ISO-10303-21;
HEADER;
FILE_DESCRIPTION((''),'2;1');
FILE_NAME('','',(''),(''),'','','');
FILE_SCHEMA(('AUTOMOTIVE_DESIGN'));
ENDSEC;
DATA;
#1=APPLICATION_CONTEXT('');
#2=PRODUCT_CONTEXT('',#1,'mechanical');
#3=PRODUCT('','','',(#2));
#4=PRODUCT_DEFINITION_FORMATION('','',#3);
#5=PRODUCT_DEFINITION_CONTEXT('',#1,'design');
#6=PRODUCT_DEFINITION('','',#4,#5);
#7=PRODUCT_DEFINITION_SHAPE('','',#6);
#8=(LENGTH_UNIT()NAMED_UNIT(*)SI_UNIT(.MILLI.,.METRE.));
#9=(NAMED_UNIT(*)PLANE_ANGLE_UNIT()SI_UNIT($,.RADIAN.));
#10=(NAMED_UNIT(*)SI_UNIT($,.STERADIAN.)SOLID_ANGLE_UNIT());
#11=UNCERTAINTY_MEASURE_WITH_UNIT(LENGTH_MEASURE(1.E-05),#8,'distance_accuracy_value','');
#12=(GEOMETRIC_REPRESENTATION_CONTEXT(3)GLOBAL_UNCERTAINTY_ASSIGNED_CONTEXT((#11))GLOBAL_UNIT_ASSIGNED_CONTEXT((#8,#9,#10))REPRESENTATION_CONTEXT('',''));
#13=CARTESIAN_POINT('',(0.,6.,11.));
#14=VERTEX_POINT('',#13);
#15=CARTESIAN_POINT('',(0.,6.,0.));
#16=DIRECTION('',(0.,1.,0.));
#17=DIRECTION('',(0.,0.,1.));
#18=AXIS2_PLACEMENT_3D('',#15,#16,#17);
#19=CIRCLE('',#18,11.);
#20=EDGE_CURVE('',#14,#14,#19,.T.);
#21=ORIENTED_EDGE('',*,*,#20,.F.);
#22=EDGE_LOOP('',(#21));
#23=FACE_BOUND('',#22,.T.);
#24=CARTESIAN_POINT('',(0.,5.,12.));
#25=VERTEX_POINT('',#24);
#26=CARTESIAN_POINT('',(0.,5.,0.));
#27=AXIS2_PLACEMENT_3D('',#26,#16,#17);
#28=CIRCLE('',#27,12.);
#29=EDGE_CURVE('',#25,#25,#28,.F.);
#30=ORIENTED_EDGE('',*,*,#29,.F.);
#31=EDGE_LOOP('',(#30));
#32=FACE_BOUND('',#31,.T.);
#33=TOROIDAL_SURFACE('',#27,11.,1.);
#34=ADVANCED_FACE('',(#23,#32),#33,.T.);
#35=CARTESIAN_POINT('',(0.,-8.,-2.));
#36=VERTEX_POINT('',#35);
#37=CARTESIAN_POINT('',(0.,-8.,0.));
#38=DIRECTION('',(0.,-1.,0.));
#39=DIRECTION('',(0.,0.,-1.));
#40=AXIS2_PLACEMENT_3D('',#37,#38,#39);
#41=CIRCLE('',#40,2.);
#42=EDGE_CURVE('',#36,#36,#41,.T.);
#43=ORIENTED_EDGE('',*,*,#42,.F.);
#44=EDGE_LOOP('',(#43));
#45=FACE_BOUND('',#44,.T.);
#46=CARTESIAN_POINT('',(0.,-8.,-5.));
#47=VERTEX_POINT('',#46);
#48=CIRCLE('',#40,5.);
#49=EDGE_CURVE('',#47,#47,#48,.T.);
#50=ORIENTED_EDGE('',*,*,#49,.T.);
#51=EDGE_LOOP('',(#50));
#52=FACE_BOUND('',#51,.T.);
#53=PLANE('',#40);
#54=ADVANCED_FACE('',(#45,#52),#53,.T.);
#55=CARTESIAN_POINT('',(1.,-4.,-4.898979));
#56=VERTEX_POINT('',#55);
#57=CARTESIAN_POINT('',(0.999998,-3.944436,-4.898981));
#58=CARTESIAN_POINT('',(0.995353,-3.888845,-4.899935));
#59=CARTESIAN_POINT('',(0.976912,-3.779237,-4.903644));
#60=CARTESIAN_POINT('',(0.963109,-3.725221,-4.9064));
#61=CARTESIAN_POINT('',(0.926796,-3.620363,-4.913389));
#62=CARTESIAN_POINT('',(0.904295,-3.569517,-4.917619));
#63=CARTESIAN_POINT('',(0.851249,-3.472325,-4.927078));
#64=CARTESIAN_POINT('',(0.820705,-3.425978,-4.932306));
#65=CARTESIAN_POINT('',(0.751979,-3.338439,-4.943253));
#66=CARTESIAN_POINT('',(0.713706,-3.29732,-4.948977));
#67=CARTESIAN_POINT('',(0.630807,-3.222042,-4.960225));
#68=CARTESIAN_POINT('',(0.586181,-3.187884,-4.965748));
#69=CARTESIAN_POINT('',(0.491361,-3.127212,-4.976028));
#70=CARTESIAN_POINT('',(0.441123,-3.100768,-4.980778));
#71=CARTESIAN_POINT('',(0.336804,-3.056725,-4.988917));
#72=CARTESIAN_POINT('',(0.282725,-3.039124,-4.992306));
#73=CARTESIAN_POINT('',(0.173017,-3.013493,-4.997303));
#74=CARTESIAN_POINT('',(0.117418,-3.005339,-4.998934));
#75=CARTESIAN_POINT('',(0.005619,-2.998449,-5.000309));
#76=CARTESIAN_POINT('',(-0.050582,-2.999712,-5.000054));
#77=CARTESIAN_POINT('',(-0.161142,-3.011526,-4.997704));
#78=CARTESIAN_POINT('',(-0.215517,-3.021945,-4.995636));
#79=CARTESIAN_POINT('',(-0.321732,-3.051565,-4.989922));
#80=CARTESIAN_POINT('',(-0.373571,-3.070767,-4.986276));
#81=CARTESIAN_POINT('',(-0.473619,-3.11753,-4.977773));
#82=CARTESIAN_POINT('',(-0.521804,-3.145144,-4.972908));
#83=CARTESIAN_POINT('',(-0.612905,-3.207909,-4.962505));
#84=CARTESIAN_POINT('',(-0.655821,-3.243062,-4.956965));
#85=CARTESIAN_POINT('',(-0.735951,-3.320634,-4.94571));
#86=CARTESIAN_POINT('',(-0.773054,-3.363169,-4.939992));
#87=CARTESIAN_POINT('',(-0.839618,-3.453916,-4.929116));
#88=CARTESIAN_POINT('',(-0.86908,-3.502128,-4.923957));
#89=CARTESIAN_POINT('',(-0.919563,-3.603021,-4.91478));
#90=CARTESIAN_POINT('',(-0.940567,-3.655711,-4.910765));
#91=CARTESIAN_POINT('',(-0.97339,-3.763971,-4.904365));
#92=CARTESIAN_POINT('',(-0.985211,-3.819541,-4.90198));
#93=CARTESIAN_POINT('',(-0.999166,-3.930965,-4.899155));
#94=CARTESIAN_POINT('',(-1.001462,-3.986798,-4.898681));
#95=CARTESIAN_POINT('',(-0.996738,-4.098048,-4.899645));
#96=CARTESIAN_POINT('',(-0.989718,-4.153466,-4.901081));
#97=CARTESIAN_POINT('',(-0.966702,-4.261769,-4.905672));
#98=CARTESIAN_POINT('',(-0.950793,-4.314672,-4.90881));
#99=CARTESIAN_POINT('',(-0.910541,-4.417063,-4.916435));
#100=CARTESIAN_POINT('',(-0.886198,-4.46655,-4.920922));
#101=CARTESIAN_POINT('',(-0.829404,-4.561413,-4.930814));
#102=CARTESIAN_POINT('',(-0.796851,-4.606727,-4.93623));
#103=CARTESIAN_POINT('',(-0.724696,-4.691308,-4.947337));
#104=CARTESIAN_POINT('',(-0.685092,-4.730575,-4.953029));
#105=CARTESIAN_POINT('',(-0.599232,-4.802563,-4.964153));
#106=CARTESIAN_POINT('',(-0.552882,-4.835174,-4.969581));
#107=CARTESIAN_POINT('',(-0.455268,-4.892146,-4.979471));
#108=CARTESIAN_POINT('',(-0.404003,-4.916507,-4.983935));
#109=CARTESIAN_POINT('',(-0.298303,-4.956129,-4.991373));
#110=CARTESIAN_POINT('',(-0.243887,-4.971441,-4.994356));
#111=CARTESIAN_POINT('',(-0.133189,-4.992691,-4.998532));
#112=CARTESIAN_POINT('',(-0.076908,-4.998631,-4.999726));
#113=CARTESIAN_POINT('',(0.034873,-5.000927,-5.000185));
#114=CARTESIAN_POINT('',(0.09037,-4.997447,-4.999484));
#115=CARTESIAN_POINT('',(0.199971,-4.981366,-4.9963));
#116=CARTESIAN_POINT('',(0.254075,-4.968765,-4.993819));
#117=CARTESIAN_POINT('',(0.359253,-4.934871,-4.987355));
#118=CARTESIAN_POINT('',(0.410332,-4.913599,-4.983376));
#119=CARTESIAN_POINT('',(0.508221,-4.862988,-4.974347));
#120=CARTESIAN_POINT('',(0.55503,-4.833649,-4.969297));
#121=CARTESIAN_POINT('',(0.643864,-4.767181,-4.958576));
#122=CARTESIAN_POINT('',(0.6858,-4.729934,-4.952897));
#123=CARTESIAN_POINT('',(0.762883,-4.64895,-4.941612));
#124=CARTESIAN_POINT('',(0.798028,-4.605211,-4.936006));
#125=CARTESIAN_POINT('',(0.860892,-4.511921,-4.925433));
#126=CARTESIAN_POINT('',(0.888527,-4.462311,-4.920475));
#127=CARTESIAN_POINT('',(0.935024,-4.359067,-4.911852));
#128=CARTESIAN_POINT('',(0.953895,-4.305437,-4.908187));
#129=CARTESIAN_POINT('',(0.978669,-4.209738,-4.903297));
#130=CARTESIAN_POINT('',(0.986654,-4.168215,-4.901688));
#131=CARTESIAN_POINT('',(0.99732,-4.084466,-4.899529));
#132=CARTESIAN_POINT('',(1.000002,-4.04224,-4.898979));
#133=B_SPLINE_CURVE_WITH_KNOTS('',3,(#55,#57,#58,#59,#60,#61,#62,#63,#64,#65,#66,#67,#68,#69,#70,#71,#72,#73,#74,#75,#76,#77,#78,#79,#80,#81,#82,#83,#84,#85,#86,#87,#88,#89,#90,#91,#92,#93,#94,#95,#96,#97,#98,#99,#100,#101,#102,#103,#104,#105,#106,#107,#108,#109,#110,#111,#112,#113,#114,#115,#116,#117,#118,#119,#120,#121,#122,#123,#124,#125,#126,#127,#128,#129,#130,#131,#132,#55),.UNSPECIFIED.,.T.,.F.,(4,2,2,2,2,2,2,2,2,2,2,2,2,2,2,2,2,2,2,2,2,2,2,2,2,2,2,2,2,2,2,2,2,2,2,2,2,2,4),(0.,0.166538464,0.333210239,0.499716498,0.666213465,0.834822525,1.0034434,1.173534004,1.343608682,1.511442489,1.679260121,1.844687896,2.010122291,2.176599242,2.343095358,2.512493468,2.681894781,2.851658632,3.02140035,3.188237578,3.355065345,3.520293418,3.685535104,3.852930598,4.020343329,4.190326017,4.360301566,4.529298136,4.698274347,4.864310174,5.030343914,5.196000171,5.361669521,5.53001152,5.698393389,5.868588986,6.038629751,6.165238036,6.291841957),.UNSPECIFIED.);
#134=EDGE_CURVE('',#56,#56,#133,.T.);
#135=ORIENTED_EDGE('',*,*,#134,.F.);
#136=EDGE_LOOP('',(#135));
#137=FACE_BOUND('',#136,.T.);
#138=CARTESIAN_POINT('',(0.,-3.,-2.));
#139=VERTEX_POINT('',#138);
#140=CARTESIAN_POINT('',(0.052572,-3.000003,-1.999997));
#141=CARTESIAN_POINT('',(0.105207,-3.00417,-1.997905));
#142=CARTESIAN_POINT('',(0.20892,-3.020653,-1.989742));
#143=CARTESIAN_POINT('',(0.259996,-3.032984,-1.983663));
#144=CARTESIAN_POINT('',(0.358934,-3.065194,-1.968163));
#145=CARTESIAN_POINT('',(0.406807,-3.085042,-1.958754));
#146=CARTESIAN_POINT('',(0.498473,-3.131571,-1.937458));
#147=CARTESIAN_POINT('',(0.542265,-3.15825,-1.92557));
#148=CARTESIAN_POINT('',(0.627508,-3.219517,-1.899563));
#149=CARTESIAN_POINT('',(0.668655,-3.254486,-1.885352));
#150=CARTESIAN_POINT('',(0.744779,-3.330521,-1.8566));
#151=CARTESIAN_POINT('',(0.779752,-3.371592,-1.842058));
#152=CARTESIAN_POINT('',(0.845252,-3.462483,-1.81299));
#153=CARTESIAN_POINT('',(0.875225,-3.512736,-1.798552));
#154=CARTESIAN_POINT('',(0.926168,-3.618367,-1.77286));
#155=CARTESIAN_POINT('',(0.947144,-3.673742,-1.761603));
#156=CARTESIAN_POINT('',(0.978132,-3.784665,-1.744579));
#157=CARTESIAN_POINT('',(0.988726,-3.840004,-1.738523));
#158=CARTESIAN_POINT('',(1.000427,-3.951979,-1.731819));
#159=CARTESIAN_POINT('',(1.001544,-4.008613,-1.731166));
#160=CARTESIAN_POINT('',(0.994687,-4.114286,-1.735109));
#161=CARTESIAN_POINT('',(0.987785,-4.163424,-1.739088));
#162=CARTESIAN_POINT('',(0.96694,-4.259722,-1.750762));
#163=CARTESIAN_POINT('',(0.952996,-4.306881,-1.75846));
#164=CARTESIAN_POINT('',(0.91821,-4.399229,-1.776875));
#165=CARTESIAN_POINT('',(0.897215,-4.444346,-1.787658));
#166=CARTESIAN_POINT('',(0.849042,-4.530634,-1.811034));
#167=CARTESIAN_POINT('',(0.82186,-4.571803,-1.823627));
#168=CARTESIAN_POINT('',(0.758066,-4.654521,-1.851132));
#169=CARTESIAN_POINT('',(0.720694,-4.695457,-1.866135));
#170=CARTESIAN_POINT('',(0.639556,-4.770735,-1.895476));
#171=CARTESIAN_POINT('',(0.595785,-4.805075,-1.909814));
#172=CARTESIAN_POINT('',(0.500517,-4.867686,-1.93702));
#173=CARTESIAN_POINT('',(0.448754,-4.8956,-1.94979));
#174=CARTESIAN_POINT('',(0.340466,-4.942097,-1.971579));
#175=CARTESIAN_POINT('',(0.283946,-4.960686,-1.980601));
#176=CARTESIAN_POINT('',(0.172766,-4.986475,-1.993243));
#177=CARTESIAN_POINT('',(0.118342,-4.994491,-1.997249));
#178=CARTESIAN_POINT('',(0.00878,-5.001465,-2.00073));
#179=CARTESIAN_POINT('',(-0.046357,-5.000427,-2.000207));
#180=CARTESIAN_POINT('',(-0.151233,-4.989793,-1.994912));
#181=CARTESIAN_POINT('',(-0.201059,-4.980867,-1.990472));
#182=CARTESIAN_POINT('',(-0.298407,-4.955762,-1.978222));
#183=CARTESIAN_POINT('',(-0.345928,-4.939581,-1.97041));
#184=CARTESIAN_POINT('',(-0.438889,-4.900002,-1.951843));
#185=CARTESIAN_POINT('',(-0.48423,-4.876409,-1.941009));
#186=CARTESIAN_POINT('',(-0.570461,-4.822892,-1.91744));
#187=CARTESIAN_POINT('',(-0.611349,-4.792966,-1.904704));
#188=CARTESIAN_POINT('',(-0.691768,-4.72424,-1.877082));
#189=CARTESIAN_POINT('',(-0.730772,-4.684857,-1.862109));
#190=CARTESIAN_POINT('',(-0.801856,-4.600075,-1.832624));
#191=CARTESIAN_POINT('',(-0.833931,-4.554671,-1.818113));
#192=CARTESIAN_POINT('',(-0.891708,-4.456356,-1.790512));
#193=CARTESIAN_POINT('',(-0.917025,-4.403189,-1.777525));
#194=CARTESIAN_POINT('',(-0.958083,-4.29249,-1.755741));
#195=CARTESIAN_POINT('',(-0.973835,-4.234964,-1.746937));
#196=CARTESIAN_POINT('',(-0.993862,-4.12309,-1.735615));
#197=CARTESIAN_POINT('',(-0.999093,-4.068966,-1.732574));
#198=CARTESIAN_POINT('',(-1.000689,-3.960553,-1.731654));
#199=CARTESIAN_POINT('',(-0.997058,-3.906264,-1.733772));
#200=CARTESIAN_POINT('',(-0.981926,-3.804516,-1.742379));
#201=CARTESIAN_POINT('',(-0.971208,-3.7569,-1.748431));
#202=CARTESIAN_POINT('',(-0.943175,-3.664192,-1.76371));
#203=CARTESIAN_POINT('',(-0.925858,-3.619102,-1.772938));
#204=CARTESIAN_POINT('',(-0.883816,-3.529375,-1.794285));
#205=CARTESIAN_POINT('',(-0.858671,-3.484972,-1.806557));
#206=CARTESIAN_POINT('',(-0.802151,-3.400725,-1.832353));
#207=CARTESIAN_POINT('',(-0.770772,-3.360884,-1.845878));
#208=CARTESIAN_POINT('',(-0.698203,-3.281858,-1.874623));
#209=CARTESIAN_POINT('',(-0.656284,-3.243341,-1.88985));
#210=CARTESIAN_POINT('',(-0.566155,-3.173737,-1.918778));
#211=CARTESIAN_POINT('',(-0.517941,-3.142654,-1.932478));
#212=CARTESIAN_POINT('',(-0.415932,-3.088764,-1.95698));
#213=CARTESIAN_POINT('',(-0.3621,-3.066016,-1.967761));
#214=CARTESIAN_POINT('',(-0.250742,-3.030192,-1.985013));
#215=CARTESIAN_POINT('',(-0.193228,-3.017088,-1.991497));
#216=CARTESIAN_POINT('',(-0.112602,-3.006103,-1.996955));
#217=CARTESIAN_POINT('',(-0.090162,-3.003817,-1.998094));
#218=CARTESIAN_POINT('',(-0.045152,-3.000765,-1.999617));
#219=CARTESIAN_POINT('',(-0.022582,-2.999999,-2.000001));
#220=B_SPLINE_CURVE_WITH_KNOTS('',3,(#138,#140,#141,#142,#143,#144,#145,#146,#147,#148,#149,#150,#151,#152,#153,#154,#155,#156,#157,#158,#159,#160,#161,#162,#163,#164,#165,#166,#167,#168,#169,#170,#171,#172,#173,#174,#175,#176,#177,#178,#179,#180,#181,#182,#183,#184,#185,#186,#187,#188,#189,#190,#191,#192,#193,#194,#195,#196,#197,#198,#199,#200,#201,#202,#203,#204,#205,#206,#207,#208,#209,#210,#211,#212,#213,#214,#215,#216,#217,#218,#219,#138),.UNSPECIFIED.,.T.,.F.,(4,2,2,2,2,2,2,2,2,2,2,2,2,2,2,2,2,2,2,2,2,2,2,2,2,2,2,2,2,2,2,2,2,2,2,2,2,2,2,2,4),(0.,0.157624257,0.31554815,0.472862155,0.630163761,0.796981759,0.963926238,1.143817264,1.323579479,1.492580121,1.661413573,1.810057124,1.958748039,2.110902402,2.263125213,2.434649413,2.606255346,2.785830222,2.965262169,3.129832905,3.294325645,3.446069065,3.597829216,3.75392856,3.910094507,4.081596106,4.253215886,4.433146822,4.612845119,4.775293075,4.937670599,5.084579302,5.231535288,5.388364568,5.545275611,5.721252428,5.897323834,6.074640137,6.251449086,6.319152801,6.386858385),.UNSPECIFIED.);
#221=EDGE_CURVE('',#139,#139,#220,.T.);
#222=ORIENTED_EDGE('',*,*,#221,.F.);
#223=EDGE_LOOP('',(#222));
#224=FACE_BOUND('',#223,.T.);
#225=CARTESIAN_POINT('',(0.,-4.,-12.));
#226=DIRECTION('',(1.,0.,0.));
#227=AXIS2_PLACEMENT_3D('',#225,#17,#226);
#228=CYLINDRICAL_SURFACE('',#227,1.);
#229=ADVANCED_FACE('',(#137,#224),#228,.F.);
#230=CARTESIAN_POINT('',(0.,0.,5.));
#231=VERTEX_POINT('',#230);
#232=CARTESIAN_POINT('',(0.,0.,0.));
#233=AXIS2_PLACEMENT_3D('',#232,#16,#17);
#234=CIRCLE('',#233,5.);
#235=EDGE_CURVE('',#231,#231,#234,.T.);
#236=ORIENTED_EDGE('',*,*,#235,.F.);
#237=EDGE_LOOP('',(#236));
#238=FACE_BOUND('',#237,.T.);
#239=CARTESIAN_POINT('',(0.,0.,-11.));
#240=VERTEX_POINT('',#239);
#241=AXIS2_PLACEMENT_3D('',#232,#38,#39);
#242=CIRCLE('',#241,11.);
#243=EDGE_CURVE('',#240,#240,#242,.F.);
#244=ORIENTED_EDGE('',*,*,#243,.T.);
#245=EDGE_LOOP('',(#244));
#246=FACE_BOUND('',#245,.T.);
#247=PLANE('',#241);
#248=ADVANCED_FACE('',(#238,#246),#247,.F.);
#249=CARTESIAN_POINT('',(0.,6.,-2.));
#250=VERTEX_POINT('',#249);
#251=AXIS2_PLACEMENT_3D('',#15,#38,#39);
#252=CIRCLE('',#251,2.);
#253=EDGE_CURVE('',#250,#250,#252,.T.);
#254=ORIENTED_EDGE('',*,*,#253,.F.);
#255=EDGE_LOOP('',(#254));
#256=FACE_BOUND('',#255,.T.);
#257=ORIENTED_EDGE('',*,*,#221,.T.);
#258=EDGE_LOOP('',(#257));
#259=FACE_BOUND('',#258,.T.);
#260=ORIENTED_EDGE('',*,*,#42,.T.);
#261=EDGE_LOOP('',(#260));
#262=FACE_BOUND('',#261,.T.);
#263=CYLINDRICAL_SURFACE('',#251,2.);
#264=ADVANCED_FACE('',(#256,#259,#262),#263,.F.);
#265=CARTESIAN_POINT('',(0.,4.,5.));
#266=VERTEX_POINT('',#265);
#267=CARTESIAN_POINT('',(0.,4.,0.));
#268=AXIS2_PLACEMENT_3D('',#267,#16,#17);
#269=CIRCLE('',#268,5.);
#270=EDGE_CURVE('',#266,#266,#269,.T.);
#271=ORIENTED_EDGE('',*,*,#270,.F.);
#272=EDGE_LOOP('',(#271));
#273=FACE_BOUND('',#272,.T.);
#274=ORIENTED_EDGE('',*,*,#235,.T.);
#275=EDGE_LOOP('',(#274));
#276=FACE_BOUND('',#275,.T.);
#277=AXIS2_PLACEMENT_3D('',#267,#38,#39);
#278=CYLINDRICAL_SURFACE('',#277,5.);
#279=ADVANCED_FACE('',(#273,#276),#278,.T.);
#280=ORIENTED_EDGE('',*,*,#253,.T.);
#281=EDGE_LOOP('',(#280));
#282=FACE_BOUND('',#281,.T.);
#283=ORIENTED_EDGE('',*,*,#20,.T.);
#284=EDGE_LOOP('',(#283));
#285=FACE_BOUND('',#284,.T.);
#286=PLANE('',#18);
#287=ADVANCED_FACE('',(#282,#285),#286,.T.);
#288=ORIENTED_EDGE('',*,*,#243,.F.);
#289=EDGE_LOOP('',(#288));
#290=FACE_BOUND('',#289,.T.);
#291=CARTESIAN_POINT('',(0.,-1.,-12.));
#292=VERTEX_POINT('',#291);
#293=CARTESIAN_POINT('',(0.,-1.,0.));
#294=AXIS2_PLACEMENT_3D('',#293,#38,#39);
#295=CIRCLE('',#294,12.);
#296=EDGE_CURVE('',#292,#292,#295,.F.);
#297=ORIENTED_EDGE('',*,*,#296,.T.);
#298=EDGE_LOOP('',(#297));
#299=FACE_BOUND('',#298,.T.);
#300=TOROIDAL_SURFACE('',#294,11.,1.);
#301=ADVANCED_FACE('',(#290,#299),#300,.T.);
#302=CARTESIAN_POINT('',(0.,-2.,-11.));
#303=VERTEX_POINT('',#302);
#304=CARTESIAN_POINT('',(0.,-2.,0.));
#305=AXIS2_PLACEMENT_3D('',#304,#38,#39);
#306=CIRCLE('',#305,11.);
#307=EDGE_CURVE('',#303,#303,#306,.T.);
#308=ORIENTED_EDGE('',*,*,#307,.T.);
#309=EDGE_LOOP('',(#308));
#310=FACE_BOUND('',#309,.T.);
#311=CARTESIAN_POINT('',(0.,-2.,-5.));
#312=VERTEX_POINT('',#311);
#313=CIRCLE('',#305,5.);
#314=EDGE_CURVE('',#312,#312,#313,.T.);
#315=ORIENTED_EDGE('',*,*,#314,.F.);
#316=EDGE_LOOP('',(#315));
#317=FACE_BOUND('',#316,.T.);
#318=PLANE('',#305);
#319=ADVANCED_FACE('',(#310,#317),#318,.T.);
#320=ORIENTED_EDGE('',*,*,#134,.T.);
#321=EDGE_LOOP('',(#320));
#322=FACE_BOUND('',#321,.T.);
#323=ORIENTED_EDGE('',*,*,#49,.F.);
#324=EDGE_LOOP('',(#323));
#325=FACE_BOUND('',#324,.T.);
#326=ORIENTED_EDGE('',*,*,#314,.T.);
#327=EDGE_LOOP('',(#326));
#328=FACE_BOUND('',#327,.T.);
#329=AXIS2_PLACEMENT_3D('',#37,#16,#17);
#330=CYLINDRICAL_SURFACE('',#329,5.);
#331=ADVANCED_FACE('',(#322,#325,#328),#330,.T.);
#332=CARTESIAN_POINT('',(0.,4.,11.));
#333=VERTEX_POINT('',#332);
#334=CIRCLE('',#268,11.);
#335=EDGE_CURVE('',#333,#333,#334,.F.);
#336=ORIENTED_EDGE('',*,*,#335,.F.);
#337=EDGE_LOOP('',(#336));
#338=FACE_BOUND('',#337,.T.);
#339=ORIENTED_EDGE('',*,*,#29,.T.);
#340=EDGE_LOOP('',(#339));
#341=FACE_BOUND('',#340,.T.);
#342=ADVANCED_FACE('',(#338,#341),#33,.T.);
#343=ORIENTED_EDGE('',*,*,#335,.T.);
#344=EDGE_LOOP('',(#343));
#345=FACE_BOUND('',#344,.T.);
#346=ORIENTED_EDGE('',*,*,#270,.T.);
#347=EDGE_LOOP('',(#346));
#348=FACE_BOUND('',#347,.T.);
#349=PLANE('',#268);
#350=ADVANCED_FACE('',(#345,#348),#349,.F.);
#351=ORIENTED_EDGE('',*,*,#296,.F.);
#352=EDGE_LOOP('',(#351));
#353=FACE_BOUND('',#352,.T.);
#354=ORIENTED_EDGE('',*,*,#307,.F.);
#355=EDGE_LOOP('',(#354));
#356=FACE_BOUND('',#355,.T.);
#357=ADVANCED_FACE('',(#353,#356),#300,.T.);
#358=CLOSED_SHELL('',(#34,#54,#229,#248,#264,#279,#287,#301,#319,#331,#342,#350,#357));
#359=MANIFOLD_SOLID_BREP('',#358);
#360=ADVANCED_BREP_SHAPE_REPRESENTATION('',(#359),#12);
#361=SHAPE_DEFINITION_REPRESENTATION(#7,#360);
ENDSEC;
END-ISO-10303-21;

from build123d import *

# Parameters (mm, degrees)
SKETCH_1_R          = 5
EXTRUDE_1_DEPTH     = 4
SKETCH_2_R          = 12
EXTRUDE_2_DEPTH     = 2
EXTRUDE_START       = 2
SKETCH_3_R          = 12
EXTRUDE_3_DEPTH     = 2
EXTRUDE_START_2     = 6
SKETCH_4_R          = 5
EXTRUDE_4_DEPTH     = 6
SKETCH_5_R          = 2
CUT_EXTRUDE_1_DEPTH = 23
FILLET_2_R          = 1
SKETCH_6_R          = 1
CUT_EXTRUDE_2_DEPTH = 19.761663039


with BuildPart() as part:
    # 草图1 → 凸台-拉伸1 (new body)
    with BuildSketch(Plane(origin=(0, 0, 0), x_dir=(1, 0, 0), z_dir=(0, 1, 0))):
        with Locations(Location((0, 0, 0), (0, 0, 270))):
            Circle(SKETCH_1_R)
    extrude(amount=EXTRUDE_1_DEPTH)

    # 草图2 → 凸台-拉伸2 (add)
    with BuildSketch(Plane(origin=(0, 4, 0), x_dir=(1, 0, 0), z_dir=(0, 1, 0))):
        with Locations(Location((0, 0, 0), (0, 0, 270))):
            Circle(SKETCH_2_R)
    extrude(amount=EXTRUDE_2_DEPTH)

    # 草图3 → 凸台-拉伸3 (add)
    with BuildSketch(Plane.XZ.offset(EXTRUDE_START)):
        with Locations(Location((0, 0, 0), (0, 0, 90))):
            Circle(SKETCH_3_R)
    extrude(amount=-EXTRUDE_3_DEPTH)

    # 草图4 → 凸台-拉伸4 (add)
    with BuildSketch(Plane(origin=(0, -2, 0), x_dir=(-1, 0, 0), z_dir=(0, -1, 0)).offset(EXTRUDE_START_2)):
        with Locations(Location((0, 0, 0), (0, 0, 270))):
            Circle(SKETCH_4_R)
    extrude(amount=-EXTRUDE_4_DEPTH)

    # 草图5 → 切除-拉伸1 (cut, through all)
    with BuildSketch(Plane.XZ.offset(8)):
        with Locations(Location((0, 0, 0), (0, 0, 270))):
            Circle(SKETCH_5_R)
    extrude(amount=-CUT_EXTRUDE_1_DEPTH, mode=Mode.SUBTRACT)

    # 圆角2
    fillet_2_edges = [part.edges().sort_by_distance(p)[0] for p in [
        (0, -2, -12),
        (0, 4, -12),
        (0, 6, -12),
        (0, 0, -12),
    ]]
    fillet(fillet_2_edges, radius=FILLET_2_R - 0.0001)  # a hair under: the kernel refuses the full size

    # 草图6 → 切除-拉伸2 (cut, through all)
    with BuildSketch(Plane.XY):
        with Locations(Location((0, -4, 0), (0, 0, 90))):
            Circle(SKETCH_6_R)
    extrude(amount=-CUT_EXTRUDE_2_DEPTH, mode=Mode.SUBTRACT)


solid = part.part
